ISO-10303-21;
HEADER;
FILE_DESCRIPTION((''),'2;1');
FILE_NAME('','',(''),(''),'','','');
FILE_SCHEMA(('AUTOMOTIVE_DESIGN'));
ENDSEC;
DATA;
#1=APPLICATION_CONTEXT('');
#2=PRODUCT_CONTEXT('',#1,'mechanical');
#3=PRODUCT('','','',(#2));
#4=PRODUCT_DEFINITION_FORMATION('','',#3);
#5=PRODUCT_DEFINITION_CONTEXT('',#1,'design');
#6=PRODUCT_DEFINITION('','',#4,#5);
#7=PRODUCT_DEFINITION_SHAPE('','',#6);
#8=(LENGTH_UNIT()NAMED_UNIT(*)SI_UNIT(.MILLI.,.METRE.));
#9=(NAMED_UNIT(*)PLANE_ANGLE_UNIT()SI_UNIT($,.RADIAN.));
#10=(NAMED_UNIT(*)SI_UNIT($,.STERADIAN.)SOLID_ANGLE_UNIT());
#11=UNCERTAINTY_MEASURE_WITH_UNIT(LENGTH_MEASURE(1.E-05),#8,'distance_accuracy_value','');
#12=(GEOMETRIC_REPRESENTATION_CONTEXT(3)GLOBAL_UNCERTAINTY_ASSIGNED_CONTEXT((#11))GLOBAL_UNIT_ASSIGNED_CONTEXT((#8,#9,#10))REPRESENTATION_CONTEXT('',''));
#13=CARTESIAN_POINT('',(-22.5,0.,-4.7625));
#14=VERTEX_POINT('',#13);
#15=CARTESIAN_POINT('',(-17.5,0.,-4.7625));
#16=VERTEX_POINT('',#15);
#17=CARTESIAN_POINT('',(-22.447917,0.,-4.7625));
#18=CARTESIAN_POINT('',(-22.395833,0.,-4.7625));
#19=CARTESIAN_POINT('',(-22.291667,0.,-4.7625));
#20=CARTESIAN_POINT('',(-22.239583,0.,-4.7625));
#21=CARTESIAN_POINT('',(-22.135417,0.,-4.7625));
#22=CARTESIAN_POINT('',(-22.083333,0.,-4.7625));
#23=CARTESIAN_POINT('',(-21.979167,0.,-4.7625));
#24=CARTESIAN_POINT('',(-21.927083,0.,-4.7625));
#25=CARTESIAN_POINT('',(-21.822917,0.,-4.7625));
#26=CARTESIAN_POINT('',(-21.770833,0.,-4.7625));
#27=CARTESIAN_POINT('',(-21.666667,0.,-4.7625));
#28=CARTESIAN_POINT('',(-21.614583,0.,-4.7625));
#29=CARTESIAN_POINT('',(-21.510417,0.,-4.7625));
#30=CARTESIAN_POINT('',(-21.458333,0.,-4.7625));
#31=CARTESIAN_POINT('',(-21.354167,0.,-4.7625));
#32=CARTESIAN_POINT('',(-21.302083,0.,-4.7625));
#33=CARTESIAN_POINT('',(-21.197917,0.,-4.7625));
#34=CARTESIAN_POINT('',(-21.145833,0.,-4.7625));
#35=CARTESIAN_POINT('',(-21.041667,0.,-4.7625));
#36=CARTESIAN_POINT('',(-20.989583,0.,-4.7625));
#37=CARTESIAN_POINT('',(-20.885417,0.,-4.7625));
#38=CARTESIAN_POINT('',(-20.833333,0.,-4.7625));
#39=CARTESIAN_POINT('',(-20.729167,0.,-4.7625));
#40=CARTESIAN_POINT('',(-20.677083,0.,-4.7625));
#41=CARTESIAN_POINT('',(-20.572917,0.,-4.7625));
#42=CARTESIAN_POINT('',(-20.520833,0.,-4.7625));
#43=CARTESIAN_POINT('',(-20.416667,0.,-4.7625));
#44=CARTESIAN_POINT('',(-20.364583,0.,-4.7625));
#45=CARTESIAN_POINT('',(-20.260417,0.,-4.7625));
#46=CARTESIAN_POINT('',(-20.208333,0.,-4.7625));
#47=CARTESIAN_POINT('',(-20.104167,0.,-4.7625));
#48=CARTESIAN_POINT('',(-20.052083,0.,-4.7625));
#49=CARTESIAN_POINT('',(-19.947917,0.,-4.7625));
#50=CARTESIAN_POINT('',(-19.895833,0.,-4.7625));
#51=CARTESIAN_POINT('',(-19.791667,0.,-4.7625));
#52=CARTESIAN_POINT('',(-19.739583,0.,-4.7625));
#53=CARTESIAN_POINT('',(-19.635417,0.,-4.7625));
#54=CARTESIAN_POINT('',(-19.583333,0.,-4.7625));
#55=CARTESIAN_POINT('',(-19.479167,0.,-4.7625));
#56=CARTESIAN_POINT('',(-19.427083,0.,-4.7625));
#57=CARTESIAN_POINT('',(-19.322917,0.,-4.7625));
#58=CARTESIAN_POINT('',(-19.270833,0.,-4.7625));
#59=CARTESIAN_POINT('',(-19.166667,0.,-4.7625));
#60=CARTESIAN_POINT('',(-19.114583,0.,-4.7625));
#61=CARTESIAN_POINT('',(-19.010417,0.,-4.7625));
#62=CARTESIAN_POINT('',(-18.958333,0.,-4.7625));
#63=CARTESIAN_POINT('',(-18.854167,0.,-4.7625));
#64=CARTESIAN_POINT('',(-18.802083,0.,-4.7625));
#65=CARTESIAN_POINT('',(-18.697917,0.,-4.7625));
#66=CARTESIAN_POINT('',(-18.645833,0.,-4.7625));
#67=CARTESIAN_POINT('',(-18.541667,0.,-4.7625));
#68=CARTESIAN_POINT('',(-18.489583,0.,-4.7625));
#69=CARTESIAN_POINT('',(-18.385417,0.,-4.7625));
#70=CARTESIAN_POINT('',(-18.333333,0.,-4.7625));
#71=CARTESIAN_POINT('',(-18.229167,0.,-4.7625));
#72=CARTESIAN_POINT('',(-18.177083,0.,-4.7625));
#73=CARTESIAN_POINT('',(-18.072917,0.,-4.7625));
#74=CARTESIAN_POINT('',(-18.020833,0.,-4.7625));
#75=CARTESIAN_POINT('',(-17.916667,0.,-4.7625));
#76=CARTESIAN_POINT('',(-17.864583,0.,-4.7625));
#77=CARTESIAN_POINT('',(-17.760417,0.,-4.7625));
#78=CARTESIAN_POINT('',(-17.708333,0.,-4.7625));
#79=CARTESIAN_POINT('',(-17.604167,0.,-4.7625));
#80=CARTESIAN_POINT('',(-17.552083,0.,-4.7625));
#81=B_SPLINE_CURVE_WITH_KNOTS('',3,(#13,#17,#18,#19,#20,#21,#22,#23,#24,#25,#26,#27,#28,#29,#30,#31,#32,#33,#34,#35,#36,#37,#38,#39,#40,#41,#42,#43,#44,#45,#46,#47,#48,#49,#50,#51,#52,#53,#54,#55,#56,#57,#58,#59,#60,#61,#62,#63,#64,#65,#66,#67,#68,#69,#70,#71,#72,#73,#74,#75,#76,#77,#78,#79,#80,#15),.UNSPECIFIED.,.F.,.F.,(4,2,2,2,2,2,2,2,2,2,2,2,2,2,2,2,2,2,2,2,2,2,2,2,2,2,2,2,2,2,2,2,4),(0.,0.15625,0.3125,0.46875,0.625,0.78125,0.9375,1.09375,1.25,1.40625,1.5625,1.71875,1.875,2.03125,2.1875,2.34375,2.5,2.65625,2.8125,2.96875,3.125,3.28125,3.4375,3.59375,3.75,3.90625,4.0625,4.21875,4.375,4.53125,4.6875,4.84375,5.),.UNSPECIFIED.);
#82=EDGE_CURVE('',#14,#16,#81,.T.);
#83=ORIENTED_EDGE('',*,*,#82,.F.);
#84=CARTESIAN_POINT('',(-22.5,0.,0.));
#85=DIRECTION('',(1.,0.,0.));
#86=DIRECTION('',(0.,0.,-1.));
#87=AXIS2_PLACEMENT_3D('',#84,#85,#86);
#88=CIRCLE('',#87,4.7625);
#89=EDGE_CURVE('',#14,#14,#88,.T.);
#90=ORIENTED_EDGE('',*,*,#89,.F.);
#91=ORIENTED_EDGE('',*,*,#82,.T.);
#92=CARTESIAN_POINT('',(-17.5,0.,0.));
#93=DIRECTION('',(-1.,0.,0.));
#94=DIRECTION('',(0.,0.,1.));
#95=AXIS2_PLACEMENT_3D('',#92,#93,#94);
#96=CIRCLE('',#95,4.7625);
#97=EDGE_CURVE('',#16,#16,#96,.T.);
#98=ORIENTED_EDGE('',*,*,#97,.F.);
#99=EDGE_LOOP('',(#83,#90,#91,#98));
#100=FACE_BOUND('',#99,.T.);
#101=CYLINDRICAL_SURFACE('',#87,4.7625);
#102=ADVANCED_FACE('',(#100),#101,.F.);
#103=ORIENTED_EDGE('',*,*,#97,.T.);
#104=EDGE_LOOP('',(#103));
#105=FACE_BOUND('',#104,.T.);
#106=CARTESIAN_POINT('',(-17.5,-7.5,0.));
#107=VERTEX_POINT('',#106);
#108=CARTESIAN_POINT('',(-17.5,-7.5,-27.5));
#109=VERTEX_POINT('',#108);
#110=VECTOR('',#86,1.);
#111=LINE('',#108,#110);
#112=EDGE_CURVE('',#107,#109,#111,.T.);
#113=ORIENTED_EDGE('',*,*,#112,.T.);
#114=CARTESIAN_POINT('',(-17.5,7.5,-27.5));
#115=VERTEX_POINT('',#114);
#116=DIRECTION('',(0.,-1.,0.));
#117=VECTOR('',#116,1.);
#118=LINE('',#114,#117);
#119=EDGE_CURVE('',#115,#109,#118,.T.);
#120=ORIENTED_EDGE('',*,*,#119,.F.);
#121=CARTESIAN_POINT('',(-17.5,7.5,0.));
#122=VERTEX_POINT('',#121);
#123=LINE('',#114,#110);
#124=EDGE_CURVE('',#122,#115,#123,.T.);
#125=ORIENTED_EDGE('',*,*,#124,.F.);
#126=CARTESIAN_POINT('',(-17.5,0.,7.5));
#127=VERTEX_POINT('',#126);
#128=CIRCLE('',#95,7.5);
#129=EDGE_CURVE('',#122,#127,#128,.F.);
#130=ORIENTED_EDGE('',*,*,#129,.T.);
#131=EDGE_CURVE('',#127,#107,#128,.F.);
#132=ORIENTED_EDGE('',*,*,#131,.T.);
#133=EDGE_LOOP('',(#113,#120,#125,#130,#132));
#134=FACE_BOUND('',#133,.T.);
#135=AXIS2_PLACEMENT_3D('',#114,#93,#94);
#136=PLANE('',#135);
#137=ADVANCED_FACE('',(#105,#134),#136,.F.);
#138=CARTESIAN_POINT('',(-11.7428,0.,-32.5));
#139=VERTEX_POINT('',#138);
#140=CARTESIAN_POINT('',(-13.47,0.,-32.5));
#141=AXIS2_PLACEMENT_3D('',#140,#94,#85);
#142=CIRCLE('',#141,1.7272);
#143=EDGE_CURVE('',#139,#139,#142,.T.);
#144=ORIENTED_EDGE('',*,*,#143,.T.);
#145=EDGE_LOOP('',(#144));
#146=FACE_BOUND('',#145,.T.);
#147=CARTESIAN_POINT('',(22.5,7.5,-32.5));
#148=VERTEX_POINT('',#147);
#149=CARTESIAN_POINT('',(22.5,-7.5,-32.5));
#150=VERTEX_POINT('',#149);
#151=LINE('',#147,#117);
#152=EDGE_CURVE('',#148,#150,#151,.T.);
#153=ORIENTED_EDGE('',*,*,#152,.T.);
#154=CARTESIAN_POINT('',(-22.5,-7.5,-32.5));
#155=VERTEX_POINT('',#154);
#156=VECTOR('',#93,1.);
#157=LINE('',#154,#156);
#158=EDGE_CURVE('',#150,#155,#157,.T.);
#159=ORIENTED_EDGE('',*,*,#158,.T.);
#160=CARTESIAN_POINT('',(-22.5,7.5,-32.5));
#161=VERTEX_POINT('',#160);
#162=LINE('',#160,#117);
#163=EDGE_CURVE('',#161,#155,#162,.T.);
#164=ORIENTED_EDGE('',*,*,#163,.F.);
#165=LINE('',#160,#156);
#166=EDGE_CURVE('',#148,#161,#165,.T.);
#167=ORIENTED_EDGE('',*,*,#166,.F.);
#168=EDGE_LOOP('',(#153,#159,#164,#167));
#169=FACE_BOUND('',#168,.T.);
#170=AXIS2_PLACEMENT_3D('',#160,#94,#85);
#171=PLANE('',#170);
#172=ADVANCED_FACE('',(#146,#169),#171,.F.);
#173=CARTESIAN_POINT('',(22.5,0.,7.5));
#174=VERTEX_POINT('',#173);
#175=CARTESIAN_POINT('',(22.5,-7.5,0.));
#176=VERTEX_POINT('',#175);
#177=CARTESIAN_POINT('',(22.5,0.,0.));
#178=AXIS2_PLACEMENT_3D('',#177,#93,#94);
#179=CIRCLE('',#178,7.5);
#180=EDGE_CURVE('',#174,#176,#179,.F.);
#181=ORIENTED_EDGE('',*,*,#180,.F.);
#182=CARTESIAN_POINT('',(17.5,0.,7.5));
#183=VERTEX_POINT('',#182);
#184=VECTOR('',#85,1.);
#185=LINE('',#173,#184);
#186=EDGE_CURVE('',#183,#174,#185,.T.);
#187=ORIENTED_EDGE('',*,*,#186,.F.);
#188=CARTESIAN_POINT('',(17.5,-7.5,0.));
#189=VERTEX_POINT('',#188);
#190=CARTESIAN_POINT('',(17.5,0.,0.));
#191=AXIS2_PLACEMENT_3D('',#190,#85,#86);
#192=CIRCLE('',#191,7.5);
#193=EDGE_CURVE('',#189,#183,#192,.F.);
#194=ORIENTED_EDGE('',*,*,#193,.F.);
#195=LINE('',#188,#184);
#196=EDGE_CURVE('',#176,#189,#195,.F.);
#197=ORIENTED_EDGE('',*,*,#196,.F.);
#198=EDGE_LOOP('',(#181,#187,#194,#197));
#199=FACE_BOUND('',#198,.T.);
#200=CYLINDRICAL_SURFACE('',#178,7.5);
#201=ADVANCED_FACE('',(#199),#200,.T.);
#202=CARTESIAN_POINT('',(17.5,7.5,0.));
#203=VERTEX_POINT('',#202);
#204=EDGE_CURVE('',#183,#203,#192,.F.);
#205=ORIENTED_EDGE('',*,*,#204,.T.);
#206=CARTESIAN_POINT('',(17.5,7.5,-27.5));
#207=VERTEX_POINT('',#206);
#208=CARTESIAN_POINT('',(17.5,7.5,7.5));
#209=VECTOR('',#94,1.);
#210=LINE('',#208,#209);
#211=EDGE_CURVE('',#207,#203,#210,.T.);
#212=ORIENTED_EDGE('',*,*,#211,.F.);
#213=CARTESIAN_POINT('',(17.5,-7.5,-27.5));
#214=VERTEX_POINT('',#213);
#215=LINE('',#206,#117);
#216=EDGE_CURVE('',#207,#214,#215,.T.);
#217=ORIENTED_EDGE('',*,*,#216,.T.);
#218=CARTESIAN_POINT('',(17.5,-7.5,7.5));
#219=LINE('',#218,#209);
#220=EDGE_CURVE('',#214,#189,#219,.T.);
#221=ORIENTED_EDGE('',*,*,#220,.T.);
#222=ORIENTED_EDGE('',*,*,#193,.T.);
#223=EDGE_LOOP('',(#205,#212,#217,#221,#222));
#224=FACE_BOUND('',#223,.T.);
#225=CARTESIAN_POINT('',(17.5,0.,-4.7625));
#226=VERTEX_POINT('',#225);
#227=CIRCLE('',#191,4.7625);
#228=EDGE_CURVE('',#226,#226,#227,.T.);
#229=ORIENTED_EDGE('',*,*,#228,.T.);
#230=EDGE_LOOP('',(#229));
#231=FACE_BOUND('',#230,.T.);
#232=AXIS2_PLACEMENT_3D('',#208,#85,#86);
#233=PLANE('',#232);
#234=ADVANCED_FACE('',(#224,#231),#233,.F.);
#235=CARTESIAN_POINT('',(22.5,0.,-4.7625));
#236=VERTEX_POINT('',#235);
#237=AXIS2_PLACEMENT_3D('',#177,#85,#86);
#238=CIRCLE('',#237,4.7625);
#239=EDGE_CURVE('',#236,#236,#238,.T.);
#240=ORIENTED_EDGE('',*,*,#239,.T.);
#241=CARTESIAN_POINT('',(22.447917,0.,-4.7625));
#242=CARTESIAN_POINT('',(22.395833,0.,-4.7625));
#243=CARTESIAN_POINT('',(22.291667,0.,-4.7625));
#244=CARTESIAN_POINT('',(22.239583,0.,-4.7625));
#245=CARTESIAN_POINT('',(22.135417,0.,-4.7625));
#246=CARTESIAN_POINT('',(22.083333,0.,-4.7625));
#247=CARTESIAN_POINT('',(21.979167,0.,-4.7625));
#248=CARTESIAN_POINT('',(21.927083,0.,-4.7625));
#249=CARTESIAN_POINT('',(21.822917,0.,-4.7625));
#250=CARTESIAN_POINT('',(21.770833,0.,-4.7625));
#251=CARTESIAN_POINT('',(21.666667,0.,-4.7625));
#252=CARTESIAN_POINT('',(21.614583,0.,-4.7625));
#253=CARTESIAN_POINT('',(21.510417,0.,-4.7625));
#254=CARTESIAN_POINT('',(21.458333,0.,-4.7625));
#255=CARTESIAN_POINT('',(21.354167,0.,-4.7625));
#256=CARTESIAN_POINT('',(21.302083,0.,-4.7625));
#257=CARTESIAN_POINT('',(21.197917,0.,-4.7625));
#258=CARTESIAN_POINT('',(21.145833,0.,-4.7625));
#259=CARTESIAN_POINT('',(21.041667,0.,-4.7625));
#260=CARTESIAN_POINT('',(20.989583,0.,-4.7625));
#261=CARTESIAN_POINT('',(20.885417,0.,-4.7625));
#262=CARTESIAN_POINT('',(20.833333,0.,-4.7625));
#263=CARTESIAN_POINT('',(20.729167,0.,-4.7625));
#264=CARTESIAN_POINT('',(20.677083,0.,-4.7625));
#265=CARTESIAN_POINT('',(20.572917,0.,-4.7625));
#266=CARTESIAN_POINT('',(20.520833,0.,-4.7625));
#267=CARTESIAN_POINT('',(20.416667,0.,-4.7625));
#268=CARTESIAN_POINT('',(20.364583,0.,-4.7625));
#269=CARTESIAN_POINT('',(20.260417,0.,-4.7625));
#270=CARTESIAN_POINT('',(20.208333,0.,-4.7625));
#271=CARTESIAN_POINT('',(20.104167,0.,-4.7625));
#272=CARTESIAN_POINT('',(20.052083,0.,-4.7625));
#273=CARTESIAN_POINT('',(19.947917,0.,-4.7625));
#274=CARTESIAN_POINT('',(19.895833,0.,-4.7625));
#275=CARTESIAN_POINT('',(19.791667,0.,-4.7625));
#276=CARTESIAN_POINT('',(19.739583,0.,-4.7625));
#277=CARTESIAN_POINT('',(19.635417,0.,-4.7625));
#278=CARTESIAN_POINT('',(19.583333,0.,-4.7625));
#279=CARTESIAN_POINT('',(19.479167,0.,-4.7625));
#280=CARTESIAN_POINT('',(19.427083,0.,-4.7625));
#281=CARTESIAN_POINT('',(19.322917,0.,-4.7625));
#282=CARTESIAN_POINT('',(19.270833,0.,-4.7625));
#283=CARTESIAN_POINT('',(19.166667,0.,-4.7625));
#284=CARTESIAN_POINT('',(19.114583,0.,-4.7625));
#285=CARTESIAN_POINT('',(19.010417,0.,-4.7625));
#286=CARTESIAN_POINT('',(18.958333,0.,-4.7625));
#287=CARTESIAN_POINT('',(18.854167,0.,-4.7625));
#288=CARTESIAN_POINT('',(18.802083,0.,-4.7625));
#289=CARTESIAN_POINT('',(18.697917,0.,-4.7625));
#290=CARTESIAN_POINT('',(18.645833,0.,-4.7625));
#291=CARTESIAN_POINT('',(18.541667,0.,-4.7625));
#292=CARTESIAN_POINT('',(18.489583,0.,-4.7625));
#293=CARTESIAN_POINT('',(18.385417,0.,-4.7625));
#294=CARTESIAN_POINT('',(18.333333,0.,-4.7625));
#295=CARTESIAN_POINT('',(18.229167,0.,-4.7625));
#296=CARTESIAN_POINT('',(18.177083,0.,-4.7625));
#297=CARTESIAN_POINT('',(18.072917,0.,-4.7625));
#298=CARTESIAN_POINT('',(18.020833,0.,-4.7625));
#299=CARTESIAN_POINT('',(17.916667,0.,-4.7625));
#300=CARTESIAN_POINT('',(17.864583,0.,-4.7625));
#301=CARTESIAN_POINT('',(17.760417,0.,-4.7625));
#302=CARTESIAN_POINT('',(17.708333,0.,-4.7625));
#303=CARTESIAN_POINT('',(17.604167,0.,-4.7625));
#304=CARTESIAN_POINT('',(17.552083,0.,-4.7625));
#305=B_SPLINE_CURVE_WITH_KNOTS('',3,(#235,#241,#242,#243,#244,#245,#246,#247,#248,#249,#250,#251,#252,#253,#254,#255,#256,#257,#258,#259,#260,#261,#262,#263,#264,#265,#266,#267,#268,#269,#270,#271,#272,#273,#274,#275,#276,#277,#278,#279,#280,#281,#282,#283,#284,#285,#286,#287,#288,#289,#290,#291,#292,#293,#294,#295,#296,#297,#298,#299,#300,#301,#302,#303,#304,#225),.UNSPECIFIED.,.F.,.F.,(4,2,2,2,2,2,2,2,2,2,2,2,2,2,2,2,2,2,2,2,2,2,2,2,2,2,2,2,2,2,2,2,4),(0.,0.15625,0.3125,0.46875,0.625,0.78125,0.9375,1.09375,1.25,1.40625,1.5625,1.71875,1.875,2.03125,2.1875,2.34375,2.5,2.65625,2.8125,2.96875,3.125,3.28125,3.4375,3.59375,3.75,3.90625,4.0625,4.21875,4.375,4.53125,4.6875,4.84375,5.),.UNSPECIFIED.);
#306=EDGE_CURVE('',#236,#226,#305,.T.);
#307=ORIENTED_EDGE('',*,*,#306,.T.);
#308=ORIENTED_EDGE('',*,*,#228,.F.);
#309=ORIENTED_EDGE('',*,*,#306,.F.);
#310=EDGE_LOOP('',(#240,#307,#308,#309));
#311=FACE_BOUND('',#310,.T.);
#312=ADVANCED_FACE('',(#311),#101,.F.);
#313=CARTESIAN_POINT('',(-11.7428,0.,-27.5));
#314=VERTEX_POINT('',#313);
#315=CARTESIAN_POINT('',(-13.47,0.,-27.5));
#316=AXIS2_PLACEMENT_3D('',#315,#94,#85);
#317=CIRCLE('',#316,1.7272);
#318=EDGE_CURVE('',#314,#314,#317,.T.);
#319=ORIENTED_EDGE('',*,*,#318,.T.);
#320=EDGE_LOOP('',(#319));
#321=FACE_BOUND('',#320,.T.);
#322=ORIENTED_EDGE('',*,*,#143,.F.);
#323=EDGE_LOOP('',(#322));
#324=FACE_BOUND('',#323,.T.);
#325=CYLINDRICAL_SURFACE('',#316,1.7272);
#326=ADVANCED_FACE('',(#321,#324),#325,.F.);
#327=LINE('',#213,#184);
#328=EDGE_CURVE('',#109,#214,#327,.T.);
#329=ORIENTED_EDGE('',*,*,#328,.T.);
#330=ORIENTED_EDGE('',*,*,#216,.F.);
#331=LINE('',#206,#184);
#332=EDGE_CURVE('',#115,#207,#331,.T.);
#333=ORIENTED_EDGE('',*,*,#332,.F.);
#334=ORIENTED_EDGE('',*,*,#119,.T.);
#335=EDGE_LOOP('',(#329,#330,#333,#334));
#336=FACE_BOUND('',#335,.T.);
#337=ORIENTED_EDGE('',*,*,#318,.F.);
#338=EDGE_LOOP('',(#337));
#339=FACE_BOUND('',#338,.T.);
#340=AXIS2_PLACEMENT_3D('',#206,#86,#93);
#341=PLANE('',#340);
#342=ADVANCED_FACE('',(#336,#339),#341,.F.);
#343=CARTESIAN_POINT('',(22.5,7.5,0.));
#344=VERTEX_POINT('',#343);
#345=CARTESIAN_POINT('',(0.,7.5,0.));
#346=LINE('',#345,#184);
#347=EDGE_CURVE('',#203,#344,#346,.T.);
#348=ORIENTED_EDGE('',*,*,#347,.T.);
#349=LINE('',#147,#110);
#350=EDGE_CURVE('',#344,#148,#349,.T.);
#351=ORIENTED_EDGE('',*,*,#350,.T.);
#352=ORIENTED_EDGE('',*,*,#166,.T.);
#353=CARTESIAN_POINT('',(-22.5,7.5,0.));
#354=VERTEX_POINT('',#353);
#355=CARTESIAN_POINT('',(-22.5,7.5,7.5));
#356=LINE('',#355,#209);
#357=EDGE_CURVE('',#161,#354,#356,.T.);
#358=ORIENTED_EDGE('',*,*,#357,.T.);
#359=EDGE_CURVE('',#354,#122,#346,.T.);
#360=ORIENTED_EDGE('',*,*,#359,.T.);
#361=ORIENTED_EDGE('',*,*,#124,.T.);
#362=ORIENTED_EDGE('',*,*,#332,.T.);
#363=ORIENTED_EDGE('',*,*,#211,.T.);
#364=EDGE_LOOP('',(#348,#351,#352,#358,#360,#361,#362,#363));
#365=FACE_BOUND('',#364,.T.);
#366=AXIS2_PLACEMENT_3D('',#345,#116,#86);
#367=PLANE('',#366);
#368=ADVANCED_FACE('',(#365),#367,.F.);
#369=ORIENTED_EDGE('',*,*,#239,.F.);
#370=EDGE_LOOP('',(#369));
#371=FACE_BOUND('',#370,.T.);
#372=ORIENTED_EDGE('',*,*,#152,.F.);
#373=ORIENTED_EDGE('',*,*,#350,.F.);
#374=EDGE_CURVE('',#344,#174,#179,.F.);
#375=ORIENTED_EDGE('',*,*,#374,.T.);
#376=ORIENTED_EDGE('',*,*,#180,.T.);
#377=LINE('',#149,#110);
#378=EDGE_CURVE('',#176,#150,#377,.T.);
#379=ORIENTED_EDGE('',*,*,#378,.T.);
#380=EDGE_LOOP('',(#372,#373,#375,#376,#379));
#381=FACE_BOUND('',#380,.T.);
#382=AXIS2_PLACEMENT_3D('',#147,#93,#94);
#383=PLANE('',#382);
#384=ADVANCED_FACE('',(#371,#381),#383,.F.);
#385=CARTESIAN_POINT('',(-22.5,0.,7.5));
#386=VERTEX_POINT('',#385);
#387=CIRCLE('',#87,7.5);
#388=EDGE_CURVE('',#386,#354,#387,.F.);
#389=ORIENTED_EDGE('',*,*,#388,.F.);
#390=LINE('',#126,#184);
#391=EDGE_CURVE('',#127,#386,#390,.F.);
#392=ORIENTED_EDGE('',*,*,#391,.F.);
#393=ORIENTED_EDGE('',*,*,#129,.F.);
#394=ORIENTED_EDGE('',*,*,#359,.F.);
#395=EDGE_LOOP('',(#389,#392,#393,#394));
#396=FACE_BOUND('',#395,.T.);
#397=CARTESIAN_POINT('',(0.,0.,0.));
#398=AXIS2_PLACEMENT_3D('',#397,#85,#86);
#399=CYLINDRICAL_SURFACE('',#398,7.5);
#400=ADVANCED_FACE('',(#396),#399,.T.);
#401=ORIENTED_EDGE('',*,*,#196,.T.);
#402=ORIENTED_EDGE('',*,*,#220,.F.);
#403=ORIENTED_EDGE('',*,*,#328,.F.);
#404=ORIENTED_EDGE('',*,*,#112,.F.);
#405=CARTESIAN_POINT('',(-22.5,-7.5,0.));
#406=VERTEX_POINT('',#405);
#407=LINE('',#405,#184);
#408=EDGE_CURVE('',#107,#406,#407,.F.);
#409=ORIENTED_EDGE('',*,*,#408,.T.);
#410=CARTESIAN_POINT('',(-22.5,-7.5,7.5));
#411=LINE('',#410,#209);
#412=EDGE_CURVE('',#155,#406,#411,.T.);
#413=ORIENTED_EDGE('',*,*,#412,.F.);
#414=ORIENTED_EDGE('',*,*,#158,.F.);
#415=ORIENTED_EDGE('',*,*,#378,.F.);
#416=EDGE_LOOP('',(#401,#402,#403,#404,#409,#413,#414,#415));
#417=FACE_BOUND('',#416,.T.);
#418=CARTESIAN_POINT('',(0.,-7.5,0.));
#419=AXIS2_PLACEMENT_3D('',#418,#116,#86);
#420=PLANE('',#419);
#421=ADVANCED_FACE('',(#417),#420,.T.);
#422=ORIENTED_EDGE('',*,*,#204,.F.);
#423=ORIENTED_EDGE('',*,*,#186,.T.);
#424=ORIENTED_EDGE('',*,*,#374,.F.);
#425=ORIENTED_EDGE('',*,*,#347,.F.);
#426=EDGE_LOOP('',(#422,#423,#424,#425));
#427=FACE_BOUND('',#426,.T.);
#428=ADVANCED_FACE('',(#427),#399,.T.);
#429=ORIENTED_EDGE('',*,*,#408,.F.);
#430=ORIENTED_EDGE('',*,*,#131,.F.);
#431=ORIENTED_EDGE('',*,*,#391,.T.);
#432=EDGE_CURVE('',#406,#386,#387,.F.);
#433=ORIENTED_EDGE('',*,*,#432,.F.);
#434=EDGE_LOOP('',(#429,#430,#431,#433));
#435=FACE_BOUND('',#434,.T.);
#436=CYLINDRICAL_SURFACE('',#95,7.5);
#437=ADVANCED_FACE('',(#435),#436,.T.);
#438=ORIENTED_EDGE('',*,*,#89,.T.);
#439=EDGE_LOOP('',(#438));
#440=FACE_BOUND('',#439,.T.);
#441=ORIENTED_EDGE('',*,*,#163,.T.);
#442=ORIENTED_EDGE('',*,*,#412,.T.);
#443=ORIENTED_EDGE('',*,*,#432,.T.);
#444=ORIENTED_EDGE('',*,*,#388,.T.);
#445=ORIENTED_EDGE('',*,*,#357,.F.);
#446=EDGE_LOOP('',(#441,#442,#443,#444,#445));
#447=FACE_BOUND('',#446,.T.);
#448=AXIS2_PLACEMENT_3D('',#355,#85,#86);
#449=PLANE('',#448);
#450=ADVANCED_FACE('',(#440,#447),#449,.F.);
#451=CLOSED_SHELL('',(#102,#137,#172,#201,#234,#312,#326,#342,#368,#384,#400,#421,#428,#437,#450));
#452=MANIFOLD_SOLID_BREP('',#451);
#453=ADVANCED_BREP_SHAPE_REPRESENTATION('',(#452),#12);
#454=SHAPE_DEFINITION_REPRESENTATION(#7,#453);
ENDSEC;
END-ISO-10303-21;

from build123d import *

# Parameters (mm, degrees)
BOSS_EXTRUDE1_DEPTH     = 7.5
CUT_EXTRUDE1_DEPTH      = 41.233692349
CUT_EXTRUDE1_DEPTH_BACK = 41.233692349
SKETCH3_R               = 4.7625
FILLET1_R               = 7.5
F_8_32_TAPPED_HOLE1_D   = 3.4544


with BuildPart() as part:
    # Sketch1 → Boss-Extrude1 (new, symmetric)
    with BuildSketch(Plane(origin=(0, 0, 0), x_dir=(1, 0, 0), z_dir=(0, 1, 0))):
        Polygon((-17.5, -7.5), (-22.5, -7.5), (-22.5, 32.5), (22.5, 32.5), (22.5, -7.5), (17.5, -7.5), (17.5, 27.5), (-17.5, 27.5), align=None)
    extrude(amount=BOSS_EXTRUDE1_DEPTH, both=True)

    # Sketch3 → Cut-Extrude1 (cut, two sides: drawn at the far end of the back side and taken through both)
    with BuildSketch(Plane(origin=(0, 0, 0), x_dir=(0, 0, -1), z_dir=(1, 0, 0)).offset(-CUT_EXTRUDE1_DEPTH_BACK)):
        Circle(SKETCH3_R)
    extrude(amount=CUT_EXTRUDE1_DEPTH + CUT_EXTRUDE1_DEPTH_BACK, mode=Mode.SUBTRACT)

    # Fillet1
    fillet1_edges = [part.edges().sort_by_distance(p)[0] for p in [
        (20, 7.5, 7.5),
        (20, -7.5, 7.5),
        (-20, -7.5, 7.5),
        (-20, 7.5, 7.5),
    ]]
    fillet(fillet1_edges, radius=FILLET1_R - 0.0001)  # a hair under: the kernel refuses the full size

    # #8-32 Tapped Hole1 (through all)
    with Locations(Plane.XY.offset(-27.5)):
        with Locations((-13.47, 0)):
            Hole(F_8_32_TAPPED_HOLE1_D / 2)


solid = part.part
